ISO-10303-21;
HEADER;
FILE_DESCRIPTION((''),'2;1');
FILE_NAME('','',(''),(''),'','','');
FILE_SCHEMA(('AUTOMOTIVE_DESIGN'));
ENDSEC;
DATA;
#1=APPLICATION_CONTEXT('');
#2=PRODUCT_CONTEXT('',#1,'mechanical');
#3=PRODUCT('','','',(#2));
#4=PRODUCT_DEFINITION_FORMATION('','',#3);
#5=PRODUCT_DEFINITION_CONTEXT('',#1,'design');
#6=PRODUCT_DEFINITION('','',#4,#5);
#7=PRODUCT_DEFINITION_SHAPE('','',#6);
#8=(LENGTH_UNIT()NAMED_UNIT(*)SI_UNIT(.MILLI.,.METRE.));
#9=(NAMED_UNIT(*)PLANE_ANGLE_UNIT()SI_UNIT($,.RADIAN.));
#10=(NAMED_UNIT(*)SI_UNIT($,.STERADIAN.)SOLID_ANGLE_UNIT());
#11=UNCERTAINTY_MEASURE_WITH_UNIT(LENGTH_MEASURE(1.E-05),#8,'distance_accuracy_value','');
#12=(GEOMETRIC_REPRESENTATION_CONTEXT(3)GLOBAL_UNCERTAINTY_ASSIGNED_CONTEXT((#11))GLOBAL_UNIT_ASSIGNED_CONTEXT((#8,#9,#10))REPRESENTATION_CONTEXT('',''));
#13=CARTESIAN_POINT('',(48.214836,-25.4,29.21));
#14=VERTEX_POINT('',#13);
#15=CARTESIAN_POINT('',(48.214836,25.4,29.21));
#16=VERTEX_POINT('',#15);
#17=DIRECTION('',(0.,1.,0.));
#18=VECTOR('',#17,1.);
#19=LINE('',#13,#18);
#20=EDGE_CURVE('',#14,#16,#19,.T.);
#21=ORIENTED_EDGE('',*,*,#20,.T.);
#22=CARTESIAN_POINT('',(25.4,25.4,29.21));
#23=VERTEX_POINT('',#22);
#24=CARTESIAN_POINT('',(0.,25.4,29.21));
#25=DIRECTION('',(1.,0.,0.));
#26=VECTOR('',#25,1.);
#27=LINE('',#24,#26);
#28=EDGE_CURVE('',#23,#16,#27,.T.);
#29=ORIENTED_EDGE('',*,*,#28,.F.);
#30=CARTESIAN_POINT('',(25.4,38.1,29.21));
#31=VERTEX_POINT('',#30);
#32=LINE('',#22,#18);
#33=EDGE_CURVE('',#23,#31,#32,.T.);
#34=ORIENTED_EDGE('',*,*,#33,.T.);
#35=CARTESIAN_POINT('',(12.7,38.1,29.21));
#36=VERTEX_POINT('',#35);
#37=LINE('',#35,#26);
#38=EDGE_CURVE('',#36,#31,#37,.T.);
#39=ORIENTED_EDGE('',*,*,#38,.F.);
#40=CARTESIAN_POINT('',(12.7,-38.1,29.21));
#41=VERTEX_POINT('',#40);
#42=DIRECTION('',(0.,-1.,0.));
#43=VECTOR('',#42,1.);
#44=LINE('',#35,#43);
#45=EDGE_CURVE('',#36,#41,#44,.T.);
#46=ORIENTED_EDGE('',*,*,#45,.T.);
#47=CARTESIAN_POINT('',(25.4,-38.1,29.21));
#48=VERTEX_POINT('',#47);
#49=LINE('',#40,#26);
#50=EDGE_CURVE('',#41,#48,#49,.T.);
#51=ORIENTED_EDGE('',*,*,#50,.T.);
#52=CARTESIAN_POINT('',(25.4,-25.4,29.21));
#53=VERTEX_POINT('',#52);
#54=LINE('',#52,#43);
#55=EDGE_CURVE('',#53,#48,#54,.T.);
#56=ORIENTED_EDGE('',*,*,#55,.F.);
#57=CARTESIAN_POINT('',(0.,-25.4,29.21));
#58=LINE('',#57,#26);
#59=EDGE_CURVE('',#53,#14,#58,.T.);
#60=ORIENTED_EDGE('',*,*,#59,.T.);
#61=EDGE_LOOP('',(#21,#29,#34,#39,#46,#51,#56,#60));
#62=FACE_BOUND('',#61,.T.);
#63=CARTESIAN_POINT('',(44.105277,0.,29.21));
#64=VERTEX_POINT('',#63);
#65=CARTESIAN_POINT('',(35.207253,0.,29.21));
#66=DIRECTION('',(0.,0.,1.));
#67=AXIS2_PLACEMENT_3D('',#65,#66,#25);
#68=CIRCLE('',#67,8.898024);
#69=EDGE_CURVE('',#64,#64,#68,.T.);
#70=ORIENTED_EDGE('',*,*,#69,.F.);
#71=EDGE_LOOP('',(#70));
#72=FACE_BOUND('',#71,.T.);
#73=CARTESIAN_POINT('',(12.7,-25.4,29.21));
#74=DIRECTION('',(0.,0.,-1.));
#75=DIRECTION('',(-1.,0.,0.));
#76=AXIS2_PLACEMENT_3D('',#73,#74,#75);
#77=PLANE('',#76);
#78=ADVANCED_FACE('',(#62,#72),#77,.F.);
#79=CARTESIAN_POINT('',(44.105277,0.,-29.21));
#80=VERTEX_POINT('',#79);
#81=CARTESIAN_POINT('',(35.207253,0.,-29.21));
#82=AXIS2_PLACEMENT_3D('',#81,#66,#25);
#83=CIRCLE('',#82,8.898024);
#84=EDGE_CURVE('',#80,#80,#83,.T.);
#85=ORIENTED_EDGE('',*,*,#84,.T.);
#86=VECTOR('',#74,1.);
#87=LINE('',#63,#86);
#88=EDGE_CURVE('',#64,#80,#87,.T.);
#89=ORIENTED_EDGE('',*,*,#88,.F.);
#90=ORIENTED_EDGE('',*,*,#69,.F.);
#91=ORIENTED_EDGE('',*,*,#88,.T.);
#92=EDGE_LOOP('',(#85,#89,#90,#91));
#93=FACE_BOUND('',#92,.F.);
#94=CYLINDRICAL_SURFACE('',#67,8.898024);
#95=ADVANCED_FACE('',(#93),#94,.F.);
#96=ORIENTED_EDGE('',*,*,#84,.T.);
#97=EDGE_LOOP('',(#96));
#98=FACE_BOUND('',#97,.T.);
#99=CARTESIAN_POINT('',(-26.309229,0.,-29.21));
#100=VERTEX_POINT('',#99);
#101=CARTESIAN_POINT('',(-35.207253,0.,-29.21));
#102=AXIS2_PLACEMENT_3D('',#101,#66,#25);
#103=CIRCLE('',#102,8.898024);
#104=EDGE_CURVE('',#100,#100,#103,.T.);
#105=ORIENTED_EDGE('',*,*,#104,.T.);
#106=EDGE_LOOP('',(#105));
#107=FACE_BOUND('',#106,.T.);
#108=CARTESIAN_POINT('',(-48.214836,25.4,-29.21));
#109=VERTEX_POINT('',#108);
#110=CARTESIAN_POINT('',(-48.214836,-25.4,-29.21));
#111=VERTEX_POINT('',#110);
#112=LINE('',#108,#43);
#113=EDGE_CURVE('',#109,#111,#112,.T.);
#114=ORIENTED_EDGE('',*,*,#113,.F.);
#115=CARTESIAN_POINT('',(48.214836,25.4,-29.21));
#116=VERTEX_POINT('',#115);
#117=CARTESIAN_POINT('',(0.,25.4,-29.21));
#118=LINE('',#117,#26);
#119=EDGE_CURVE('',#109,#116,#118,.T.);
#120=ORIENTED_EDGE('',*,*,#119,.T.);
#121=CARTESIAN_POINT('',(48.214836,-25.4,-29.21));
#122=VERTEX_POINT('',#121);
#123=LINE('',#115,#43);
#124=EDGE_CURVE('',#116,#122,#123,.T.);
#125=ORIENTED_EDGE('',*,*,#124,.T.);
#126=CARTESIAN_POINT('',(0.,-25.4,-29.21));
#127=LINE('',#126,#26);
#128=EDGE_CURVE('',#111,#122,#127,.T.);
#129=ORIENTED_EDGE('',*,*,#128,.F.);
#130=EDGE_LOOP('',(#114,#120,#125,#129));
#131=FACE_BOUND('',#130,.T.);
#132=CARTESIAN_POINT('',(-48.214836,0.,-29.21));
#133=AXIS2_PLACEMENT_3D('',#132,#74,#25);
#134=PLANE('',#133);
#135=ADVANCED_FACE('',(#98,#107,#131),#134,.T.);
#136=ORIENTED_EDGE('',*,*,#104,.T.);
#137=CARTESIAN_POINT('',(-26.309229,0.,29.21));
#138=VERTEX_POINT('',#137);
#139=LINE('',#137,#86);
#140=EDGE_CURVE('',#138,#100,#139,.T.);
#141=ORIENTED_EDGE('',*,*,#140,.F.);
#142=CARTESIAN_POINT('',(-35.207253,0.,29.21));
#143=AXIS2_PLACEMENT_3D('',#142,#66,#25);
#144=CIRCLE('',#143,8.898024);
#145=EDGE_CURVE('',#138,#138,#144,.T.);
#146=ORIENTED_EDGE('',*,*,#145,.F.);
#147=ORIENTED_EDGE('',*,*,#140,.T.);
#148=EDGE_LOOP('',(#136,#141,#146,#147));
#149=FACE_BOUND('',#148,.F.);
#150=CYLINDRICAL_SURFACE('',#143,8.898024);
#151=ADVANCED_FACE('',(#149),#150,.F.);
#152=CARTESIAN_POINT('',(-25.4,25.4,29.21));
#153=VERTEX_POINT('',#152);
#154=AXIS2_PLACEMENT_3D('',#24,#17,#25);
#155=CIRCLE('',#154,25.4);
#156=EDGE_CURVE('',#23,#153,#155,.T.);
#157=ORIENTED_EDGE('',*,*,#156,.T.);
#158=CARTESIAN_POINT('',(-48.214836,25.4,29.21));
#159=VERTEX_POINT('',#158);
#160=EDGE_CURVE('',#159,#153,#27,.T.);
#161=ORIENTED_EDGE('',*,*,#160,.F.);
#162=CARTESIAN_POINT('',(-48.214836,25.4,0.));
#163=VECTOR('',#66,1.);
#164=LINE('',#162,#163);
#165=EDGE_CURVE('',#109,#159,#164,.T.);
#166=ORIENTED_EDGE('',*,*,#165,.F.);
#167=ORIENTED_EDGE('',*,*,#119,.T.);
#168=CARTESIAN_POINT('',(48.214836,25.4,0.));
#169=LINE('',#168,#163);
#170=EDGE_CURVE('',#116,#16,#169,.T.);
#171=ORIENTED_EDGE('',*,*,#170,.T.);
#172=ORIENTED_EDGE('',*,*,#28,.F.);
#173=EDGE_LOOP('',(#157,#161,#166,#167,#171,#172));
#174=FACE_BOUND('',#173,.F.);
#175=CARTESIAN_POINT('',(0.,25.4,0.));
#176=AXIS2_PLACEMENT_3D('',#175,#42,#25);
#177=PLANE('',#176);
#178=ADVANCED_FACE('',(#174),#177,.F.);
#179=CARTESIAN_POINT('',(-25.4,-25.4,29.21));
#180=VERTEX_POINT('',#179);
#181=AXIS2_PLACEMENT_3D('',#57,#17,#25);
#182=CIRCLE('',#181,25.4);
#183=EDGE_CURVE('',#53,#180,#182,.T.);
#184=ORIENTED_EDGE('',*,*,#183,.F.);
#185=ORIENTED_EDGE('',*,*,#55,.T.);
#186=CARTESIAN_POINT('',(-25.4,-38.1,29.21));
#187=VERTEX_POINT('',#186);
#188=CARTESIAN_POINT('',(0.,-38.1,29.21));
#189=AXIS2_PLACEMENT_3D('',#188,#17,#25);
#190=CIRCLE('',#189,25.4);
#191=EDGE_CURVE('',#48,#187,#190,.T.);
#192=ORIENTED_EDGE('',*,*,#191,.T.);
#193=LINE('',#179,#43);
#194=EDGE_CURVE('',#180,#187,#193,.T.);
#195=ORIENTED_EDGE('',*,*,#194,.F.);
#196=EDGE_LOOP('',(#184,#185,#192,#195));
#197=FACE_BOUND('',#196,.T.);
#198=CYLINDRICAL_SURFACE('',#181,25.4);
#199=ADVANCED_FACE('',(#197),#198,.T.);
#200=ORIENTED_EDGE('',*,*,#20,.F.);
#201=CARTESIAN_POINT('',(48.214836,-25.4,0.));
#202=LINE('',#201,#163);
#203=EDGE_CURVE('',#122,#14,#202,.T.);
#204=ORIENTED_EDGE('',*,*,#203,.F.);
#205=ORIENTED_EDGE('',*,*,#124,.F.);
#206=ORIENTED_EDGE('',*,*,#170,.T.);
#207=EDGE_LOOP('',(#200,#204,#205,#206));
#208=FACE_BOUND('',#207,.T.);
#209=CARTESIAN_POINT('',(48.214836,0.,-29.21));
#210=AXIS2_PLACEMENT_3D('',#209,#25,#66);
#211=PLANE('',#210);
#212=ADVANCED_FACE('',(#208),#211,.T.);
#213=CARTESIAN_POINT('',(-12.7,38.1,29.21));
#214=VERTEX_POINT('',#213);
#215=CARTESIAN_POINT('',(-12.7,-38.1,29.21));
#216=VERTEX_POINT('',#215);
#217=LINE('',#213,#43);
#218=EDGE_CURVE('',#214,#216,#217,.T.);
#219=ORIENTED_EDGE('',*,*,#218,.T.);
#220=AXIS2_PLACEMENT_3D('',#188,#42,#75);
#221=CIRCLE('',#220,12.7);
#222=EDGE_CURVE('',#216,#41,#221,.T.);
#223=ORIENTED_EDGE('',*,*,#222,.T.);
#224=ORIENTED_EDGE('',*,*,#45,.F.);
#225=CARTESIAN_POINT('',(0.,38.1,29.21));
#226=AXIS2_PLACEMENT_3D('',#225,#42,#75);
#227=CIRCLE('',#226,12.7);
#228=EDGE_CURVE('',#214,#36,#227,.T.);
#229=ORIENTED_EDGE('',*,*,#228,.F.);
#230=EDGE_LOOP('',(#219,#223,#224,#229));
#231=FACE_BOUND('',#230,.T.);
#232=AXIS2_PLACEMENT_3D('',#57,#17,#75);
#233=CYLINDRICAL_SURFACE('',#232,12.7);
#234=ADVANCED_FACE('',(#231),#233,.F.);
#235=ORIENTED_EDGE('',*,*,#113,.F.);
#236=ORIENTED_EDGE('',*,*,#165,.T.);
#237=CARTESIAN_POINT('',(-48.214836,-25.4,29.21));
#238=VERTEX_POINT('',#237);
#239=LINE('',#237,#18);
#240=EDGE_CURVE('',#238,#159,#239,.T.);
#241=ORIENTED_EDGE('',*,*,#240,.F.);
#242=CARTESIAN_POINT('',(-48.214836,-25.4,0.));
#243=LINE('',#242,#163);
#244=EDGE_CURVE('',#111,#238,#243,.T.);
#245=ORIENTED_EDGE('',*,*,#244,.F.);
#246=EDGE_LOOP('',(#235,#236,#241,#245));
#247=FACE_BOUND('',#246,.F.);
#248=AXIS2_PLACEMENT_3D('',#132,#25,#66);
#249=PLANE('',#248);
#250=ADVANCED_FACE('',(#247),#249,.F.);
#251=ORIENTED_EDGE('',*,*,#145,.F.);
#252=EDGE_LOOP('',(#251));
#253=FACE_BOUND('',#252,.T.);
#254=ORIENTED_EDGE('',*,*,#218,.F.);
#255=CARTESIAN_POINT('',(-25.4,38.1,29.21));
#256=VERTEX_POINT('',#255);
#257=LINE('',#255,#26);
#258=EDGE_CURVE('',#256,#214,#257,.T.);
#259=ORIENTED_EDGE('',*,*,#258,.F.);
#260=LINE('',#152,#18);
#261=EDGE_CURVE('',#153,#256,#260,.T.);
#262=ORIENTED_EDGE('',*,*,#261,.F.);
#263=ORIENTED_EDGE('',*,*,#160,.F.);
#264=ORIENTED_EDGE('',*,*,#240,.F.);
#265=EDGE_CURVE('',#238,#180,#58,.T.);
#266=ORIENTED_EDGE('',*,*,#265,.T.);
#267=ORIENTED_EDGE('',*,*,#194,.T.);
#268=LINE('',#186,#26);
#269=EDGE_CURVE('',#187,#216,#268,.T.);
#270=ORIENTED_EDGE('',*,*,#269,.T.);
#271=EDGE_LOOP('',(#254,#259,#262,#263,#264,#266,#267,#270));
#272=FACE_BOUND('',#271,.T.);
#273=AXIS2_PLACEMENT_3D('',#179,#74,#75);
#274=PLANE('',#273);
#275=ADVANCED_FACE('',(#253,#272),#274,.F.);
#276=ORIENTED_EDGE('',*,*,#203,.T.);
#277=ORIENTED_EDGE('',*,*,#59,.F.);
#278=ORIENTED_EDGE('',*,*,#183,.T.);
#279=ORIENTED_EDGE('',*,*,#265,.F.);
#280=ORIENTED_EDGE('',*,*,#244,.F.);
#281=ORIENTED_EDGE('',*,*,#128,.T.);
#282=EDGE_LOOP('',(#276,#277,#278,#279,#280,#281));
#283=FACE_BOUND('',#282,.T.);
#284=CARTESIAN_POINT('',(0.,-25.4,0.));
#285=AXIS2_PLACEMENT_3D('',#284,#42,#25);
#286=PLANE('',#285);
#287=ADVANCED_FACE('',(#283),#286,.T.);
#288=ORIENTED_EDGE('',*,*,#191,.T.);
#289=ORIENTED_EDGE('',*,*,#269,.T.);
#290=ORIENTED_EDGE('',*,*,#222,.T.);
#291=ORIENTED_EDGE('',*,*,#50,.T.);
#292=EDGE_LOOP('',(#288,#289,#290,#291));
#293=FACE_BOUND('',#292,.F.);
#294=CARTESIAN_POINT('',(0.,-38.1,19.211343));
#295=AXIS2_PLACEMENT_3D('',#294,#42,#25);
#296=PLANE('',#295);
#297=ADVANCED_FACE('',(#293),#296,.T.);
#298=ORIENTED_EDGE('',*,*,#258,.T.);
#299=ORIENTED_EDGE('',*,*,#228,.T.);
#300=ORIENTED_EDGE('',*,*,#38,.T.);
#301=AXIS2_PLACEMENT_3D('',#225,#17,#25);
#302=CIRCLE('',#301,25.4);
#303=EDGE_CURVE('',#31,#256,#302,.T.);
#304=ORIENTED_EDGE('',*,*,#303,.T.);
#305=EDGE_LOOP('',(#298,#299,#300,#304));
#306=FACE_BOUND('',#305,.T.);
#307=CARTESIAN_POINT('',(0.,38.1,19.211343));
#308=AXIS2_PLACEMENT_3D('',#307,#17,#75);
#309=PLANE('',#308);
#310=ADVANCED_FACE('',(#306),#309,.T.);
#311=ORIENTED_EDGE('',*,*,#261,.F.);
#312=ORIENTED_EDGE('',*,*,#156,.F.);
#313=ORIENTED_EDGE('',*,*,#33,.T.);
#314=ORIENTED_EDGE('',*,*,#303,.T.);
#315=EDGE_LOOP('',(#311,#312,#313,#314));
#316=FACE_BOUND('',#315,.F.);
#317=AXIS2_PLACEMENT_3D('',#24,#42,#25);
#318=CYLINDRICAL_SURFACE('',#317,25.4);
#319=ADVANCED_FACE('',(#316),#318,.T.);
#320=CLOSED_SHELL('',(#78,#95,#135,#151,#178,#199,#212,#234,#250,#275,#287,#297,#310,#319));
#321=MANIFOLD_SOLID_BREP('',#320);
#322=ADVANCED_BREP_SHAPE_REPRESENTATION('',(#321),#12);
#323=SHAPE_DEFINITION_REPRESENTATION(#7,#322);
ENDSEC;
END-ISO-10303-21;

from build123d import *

# Parameters (mm, degrees)
F0_W     = 96.4296718666
F0_H     = 58.42
F1_DEPTH = 25.4
F4_DEPTH = 254
F6_DEPTH = 12.7
F2_R     = 8.8980244031
F7_DEPTH = 254


# Not quite as in the source:
# - a pattern or mirror of a feature is missing from the dataset's text; its kind, count and spacing are read off the source's solid


with BuildPart() as f1:
    # F0 (on Front) → F1 (new body, symmetric)
    with BuildSketch(Plane.XZ):
        Rectangle(F0_W, F0_H)
    extrude(amount=F1_DEPTH, both=True)

    # F3 (on face) → F4 (cut)
    with BuildSketch(Plane.XZ.offset(25.4)):
        with BuildLine():
            Line((12.7, 29.21), (-12.7, 29.21))
            ThreePointArc((-12.7, 29.21), (0, 16.51), (12.7, 29.21))
        make_face()
    extrude(amount=-F4_DEPTH, mode=Mode.SUBTRACT)

    # F5 (on face) → F6 (join)
    with BuildSketch(Plane(origin=(0, 25.4, 0), x_dir=(-1, 0, 0), z_dir=(0, 1, 0))):
        with BuildLine():
            Line((-12.7, 29.21), (-25.4, 29.21))
            ThreePointArc((-25.4, 29.21), (0, 3.81), (25.4, 29.21))
            Line((25.4, 29.21), (12.7, 29.21))
            ThreePointArc((12.7, 29.21), (0, 16.51), (-12.7, 29.21))
        make_face()
    f6 = extrude(amount=F6_DEPTH)

    # F6_copies: F6 across plane
    add(f6.mirror(Plane(origin=(0, 0, 0), x_dir=(0, 0, -1), z_dir=(0, -1, 0))))

    # F2 (on face) → F7 (cut)
    with BuildSketch(Plane.XY.offset(29.21)):
        with Locations((35.2072529495, 0)):
            Circle(F2_R)
        with Locations((-35.2072529495, 0)):
            Circle(F2_R)
    extrude(amount=-F7_DEPTH, mode=Mode.SUBTRACT)


solid = f1.part
